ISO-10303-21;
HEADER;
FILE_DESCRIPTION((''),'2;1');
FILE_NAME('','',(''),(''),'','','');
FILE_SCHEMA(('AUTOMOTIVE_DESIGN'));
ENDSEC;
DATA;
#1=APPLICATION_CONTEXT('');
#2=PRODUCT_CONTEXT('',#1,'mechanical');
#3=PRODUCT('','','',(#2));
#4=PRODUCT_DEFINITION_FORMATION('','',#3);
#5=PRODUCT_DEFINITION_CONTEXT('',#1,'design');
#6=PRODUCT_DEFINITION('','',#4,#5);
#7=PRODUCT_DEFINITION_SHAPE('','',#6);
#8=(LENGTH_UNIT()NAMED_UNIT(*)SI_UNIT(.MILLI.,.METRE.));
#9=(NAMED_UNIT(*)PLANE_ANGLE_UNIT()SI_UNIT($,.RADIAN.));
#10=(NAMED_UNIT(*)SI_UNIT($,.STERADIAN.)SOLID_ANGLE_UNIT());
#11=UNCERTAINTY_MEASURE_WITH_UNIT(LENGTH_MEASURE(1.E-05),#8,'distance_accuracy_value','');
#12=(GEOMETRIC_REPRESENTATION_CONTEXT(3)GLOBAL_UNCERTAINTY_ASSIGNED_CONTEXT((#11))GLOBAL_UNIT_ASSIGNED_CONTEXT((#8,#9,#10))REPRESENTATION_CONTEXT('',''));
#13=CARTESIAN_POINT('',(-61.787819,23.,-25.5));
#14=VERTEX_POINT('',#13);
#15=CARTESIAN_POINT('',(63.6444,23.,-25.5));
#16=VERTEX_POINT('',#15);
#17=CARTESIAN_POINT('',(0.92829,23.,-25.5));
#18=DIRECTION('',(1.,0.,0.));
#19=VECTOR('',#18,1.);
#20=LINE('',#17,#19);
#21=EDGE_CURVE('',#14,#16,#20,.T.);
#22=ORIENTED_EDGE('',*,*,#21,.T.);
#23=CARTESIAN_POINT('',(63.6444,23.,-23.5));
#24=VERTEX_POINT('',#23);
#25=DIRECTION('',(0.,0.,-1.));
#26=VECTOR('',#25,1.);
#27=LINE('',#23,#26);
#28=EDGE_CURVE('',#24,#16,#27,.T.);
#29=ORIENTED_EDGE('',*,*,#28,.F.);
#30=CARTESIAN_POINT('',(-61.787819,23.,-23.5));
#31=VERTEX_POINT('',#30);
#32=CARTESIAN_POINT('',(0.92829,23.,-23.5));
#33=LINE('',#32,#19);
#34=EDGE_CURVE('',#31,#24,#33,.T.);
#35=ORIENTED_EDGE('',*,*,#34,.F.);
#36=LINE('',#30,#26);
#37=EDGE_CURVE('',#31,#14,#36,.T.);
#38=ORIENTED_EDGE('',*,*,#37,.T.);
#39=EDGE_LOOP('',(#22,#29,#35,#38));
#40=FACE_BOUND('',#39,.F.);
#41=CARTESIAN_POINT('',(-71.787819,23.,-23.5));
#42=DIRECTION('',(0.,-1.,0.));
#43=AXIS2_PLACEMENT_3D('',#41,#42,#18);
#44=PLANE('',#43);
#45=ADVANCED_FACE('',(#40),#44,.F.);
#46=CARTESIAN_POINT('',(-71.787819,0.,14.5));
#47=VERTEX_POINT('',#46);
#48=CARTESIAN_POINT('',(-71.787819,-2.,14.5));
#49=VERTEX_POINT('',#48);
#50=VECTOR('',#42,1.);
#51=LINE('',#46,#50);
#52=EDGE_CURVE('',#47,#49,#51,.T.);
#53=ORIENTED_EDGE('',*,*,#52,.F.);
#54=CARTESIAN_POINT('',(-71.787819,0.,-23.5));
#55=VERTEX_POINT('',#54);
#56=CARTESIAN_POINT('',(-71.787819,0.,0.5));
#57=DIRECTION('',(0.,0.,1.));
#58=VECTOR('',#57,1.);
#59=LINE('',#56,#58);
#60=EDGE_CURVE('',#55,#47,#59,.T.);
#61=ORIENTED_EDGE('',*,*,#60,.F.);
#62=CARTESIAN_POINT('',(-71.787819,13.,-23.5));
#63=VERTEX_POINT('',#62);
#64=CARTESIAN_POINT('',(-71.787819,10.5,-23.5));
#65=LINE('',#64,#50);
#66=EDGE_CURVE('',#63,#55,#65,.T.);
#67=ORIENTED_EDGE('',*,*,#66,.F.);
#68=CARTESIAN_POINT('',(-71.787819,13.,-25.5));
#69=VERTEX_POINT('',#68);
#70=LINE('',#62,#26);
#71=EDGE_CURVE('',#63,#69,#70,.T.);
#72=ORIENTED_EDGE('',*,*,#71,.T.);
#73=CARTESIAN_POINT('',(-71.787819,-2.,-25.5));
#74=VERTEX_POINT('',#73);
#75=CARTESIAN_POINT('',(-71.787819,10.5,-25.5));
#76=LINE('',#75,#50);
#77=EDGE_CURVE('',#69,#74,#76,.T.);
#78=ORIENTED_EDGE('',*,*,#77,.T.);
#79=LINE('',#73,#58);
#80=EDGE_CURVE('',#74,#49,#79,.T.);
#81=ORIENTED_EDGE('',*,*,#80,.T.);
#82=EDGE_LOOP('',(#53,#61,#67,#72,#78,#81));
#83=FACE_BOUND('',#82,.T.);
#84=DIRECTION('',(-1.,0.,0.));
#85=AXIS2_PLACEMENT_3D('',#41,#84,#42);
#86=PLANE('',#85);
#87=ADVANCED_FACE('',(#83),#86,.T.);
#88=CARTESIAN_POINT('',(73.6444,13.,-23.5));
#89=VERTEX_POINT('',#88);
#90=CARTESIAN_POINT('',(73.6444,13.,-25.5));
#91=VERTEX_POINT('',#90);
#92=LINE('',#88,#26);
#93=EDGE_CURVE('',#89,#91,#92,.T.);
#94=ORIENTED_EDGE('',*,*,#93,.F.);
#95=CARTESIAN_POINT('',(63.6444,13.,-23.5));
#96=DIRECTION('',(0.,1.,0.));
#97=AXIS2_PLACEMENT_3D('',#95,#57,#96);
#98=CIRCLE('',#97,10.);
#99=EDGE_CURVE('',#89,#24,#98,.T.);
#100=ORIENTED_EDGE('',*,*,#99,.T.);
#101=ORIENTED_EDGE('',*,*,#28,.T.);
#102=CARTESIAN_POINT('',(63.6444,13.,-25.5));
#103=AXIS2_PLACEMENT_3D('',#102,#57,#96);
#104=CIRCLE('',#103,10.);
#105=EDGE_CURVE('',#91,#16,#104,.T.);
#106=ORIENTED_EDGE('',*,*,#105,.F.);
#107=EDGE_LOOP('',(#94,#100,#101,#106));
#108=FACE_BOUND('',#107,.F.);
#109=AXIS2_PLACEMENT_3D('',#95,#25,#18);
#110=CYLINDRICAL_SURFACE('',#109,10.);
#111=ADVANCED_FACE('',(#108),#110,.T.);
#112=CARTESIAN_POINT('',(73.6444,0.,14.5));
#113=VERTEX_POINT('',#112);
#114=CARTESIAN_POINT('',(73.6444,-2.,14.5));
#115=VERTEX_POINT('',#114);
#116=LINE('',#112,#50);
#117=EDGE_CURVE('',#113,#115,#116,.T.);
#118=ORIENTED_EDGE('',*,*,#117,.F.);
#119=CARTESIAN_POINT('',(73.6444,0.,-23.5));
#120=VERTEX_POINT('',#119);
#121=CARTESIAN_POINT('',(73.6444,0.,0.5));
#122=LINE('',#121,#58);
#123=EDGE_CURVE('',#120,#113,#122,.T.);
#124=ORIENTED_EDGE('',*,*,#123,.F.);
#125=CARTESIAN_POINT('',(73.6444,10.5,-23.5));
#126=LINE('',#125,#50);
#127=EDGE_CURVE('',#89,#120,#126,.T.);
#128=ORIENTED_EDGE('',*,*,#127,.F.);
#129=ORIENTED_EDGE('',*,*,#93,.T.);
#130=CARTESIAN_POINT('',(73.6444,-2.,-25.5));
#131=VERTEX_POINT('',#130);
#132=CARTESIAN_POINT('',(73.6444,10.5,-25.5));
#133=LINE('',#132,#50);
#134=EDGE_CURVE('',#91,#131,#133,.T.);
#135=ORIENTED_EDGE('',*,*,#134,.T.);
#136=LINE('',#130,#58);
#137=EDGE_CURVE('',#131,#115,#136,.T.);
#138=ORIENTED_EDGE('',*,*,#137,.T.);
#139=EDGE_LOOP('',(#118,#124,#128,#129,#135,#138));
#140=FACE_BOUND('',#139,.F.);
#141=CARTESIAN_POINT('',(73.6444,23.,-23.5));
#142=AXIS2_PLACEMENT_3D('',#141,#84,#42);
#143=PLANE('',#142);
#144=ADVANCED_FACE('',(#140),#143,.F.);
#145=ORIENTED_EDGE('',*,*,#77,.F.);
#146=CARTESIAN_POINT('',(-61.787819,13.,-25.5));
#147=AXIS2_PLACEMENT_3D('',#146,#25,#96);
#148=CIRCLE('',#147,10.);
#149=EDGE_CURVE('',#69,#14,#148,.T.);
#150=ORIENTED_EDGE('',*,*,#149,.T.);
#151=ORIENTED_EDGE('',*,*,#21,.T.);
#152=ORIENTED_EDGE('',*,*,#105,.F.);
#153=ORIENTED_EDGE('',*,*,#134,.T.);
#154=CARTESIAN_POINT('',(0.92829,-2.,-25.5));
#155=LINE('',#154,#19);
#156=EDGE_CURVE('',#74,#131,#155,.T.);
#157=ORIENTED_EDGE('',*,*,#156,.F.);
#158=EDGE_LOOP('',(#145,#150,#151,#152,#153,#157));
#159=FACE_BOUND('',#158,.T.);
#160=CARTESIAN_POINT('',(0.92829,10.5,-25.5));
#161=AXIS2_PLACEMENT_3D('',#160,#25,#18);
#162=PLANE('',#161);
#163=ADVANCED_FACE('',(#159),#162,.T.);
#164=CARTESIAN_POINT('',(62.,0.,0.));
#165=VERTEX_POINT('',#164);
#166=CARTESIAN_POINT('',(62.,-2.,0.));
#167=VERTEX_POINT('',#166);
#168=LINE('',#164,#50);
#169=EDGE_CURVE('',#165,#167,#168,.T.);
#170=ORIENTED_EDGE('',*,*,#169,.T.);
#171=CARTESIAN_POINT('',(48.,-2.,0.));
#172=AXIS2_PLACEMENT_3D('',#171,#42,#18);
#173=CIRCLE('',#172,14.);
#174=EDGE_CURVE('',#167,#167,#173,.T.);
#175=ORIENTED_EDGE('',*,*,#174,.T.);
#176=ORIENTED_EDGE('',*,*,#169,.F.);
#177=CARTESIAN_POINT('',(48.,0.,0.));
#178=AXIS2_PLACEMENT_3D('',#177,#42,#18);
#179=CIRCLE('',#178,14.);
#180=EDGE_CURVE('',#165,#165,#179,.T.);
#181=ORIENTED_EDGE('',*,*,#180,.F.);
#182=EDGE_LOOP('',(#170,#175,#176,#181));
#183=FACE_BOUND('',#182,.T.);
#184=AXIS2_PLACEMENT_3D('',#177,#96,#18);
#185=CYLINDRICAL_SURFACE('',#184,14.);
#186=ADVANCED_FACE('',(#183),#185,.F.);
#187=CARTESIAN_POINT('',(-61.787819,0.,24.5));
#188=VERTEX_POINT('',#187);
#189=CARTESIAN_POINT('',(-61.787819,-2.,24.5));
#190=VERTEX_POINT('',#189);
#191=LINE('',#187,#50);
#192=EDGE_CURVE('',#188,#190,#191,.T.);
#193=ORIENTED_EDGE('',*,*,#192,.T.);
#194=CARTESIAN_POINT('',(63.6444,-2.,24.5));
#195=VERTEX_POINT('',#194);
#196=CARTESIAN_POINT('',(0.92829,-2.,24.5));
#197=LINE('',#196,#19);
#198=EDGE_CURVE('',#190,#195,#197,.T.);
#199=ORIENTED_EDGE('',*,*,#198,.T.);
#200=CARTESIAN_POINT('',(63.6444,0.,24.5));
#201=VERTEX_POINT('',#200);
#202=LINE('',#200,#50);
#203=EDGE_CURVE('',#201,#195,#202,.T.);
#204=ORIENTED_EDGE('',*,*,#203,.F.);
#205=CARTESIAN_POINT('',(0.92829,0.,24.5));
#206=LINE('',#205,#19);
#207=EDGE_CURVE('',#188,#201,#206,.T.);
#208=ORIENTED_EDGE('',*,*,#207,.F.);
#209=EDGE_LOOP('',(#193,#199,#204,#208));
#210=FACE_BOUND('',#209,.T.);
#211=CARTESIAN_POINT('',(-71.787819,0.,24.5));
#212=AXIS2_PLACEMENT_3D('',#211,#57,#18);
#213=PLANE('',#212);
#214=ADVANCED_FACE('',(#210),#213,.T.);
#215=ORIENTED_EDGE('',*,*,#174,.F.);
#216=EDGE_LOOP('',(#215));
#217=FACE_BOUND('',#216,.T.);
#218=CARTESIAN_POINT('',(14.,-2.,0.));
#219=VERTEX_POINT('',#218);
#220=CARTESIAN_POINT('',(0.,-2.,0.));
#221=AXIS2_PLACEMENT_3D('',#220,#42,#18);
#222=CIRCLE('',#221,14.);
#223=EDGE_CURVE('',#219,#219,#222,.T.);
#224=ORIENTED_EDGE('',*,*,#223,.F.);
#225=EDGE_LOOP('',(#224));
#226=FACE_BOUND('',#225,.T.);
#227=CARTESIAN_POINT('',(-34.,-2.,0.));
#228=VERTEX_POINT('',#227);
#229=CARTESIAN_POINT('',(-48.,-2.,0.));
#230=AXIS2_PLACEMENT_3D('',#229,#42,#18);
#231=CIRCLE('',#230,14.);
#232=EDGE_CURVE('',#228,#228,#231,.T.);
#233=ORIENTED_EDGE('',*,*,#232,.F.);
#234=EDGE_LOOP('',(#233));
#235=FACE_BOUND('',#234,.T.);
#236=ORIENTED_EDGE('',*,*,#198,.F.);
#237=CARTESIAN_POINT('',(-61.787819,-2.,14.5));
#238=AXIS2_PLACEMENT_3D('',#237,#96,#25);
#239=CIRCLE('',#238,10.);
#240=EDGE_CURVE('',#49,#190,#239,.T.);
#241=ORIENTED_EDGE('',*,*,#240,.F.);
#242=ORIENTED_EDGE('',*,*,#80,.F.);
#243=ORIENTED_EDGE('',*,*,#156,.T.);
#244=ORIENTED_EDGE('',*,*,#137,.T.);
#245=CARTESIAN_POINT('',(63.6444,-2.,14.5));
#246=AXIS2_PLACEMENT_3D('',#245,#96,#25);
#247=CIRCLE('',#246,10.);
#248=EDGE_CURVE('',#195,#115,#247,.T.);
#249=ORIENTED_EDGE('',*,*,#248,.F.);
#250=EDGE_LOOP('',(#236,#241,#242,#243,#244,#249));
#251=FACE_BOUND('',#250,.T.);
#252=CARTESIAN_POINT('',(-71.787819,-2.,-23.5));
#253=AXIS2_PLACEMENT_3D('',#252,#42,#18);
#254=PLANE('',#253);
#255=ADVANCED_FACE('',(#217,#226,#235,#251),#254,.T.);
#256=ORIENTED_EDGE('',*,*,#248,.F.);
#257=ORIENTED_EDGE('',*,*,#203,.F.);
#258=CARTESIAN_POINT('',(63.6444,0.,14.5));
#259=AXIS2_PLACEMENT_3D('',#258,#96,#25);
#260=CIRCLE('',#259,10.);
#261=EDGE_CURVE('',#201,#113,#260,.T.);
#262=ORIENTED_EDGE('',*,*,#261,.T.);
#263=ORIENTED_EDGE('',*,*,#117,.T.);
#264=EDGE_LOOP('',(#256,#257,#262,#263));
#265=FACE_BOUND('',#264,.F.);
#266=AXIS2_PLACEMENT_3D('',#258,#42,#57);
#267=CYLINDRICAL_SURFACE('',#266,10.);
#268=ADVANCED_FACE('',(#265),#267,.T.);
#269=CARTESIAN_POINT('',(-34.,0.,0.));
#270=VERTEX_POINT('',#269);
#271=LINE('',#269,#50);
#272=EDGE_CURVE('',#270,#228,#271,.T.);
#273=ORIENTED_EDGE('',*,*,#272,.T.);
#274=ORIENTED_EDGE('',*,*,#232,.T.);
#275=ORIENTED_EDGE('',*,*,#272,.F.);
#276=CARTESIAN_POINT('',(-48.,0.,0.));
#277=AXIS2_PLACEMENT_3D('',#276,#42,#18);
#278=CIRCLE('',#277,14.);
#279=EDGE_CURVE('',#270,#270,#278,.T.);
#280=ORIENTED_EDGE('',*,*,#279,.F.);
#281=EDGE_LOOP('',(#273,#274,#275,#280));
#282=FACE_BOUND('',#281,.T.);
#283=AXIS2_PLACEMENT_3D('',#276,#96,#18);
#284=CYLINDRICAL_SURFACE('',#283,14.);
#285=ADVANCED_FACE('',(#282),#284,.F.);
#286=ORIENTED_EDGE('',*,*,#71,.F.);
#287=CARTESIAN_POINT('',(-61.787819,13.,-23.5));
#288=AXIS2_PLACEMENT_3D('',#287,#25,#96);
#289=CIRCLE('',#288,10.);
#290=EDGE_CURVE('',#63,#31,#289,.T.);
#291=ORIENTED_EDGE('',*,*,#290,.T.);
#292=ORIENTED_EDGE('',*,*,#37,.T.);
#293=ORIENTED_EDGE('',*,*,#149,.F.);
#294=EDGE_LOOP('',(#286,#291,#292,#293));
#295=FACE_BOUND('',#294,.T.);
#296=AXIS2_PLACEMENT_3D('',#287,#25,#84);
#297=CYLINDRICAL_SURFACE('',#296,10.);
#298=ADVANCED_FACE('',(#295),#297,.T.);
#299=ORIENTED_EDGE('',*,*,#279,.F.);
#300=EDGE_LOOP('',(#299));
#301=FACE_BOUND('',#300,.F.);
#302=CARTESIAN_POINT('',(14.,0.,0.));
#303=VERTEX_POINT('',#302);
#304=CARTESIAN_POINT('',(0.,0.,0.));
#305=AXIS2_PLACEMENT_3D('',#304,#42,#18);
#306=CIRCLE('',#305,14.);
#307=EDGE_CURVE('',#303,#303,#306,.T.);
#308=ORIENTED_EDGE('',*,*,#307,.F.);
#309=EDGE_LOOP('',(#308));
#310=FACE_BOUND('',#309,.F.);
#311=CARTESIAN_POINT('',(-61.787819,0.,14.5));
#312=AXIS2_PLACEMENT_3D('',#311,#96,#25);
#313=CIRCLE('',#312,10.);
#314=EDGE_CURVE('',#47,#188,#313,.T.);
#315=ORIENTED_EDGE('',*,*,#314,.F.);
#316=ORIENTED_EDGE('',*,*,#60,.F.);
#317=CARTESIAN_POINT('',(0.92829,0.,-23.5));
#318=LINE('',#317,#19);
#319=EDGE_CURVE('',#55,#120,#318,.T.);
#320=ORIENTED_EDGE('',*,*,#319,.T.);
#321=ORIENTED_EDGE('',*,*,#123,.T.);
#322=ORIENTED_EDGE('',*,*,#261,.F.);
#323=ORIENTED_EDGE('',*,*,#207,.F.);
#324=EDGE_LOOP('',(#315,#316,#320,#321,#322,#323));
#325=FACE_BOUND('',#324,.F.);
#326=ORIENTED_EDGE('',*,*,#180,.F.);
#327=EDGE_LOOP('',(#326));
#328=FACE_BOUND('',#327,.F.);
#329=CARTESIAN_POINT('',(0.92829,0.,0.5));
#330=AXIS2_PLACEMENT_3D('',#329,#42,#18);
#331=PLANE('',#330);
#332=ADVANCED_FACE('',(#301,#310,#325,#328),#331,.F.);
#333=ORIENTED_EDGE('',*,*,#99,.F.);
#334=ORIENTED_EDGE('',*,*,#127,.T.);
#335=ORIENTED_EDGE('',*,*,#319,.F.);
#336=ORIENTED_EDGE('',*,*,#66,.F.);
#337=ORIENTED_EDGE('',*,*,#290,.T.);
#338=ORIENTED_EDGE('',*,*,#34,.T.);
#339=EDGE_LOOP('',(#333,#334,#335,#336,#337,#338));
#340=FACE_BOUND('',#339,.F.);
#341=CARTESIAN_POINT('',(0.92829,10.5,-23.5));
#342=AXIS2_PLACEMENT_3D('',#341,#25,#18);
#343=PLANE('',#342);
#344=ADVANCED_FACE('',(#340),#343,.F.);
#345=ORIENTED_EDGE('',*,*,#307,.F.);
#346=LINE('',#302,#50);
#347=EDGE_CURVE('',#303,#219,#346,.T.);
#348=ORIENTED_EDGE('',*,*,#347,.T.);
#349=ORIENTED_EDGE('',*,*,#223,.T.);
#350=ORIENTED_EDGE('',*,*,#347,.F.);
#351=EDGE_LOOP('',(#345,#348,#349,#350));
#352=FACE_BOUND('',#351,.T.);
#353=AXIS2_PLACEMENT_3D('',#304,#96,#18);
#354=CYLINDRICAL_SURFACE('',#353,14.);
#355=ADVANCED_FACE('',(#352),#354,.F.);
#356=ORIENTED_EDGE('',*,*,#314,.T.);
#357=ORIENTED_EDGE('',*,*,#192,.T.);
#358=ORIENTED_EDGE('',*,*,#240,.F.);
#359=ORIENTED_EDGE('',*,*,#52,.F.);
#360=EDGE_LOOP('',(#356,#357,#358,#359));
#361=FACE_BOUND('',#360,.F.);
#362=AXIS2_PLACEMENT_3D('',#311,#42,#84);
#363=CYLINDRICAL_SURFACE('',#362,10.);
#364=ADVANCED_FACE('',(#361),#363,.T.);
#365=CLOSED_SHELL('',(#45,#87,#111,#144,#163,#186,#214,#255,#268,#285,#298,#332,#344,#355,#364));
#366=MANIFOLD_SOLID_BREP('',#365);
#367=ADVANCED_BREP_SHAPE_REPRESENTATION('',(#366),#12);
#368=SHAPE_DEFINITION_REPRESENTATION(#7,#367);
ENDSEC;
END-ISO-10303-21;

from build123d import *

# Parameters (mm, degrees)
F0_W     = 145.4322189093
F0_H     = 48
F0_R     = 14
F1_DEPTH = 2
F3_R     = 10
F4_W     = 145.4322189093
F4_H     = 25
F5_DEPTH = 2
F6_R     = 10


with BuildPart() as f1:
    # F0 (on Front) → F1 (new body)
    with BuildSketch(Plane.XZ):
        with Locations((0.9282901883, 0.5)):
            Rectangle(F0_W, F0_H)
        with Locations((-48, 0)):
            Circle(F0_R, mode=Mode.SUBTRACT)
        Circle(F0_R, mode=Mode.SUBTRACT)
        with Locations((48, 0)):
            Circle(F0_R, mode=Mode.SUBTRACT)
    extrude(amount=F1_DEPTH)

    # F3
    f3_edges = [f1.edges().sort_by_distance(p)[0] for p in [
        (73.6444, -1, 24.5),
        (-71.787819, -1, 24.5),
    ]]
    fillet(f3_edges, radius=F3_R)

    # F4 (on offset) → F5 (join)
    with BuildSketch(Plane(origin=(0, 0, -23.5), x_dir=(1, 0, 0), z_dir=(0, 0, -1))):
        with Locations((0.9282901883, -10.5)):
            Rectangle(F4_W, F4_H)
    extrude(amount=F5_DEPTH)

    # F6
    f6_edges = [f1.edges().sort_by_distance(p)[0] for p in [
        (-71.787819, 23, -24.5),
        (73.6444, 23, -24.5),
    ]]
    fillet(f6_edges, radius=F6_R)


solid = f1.part
